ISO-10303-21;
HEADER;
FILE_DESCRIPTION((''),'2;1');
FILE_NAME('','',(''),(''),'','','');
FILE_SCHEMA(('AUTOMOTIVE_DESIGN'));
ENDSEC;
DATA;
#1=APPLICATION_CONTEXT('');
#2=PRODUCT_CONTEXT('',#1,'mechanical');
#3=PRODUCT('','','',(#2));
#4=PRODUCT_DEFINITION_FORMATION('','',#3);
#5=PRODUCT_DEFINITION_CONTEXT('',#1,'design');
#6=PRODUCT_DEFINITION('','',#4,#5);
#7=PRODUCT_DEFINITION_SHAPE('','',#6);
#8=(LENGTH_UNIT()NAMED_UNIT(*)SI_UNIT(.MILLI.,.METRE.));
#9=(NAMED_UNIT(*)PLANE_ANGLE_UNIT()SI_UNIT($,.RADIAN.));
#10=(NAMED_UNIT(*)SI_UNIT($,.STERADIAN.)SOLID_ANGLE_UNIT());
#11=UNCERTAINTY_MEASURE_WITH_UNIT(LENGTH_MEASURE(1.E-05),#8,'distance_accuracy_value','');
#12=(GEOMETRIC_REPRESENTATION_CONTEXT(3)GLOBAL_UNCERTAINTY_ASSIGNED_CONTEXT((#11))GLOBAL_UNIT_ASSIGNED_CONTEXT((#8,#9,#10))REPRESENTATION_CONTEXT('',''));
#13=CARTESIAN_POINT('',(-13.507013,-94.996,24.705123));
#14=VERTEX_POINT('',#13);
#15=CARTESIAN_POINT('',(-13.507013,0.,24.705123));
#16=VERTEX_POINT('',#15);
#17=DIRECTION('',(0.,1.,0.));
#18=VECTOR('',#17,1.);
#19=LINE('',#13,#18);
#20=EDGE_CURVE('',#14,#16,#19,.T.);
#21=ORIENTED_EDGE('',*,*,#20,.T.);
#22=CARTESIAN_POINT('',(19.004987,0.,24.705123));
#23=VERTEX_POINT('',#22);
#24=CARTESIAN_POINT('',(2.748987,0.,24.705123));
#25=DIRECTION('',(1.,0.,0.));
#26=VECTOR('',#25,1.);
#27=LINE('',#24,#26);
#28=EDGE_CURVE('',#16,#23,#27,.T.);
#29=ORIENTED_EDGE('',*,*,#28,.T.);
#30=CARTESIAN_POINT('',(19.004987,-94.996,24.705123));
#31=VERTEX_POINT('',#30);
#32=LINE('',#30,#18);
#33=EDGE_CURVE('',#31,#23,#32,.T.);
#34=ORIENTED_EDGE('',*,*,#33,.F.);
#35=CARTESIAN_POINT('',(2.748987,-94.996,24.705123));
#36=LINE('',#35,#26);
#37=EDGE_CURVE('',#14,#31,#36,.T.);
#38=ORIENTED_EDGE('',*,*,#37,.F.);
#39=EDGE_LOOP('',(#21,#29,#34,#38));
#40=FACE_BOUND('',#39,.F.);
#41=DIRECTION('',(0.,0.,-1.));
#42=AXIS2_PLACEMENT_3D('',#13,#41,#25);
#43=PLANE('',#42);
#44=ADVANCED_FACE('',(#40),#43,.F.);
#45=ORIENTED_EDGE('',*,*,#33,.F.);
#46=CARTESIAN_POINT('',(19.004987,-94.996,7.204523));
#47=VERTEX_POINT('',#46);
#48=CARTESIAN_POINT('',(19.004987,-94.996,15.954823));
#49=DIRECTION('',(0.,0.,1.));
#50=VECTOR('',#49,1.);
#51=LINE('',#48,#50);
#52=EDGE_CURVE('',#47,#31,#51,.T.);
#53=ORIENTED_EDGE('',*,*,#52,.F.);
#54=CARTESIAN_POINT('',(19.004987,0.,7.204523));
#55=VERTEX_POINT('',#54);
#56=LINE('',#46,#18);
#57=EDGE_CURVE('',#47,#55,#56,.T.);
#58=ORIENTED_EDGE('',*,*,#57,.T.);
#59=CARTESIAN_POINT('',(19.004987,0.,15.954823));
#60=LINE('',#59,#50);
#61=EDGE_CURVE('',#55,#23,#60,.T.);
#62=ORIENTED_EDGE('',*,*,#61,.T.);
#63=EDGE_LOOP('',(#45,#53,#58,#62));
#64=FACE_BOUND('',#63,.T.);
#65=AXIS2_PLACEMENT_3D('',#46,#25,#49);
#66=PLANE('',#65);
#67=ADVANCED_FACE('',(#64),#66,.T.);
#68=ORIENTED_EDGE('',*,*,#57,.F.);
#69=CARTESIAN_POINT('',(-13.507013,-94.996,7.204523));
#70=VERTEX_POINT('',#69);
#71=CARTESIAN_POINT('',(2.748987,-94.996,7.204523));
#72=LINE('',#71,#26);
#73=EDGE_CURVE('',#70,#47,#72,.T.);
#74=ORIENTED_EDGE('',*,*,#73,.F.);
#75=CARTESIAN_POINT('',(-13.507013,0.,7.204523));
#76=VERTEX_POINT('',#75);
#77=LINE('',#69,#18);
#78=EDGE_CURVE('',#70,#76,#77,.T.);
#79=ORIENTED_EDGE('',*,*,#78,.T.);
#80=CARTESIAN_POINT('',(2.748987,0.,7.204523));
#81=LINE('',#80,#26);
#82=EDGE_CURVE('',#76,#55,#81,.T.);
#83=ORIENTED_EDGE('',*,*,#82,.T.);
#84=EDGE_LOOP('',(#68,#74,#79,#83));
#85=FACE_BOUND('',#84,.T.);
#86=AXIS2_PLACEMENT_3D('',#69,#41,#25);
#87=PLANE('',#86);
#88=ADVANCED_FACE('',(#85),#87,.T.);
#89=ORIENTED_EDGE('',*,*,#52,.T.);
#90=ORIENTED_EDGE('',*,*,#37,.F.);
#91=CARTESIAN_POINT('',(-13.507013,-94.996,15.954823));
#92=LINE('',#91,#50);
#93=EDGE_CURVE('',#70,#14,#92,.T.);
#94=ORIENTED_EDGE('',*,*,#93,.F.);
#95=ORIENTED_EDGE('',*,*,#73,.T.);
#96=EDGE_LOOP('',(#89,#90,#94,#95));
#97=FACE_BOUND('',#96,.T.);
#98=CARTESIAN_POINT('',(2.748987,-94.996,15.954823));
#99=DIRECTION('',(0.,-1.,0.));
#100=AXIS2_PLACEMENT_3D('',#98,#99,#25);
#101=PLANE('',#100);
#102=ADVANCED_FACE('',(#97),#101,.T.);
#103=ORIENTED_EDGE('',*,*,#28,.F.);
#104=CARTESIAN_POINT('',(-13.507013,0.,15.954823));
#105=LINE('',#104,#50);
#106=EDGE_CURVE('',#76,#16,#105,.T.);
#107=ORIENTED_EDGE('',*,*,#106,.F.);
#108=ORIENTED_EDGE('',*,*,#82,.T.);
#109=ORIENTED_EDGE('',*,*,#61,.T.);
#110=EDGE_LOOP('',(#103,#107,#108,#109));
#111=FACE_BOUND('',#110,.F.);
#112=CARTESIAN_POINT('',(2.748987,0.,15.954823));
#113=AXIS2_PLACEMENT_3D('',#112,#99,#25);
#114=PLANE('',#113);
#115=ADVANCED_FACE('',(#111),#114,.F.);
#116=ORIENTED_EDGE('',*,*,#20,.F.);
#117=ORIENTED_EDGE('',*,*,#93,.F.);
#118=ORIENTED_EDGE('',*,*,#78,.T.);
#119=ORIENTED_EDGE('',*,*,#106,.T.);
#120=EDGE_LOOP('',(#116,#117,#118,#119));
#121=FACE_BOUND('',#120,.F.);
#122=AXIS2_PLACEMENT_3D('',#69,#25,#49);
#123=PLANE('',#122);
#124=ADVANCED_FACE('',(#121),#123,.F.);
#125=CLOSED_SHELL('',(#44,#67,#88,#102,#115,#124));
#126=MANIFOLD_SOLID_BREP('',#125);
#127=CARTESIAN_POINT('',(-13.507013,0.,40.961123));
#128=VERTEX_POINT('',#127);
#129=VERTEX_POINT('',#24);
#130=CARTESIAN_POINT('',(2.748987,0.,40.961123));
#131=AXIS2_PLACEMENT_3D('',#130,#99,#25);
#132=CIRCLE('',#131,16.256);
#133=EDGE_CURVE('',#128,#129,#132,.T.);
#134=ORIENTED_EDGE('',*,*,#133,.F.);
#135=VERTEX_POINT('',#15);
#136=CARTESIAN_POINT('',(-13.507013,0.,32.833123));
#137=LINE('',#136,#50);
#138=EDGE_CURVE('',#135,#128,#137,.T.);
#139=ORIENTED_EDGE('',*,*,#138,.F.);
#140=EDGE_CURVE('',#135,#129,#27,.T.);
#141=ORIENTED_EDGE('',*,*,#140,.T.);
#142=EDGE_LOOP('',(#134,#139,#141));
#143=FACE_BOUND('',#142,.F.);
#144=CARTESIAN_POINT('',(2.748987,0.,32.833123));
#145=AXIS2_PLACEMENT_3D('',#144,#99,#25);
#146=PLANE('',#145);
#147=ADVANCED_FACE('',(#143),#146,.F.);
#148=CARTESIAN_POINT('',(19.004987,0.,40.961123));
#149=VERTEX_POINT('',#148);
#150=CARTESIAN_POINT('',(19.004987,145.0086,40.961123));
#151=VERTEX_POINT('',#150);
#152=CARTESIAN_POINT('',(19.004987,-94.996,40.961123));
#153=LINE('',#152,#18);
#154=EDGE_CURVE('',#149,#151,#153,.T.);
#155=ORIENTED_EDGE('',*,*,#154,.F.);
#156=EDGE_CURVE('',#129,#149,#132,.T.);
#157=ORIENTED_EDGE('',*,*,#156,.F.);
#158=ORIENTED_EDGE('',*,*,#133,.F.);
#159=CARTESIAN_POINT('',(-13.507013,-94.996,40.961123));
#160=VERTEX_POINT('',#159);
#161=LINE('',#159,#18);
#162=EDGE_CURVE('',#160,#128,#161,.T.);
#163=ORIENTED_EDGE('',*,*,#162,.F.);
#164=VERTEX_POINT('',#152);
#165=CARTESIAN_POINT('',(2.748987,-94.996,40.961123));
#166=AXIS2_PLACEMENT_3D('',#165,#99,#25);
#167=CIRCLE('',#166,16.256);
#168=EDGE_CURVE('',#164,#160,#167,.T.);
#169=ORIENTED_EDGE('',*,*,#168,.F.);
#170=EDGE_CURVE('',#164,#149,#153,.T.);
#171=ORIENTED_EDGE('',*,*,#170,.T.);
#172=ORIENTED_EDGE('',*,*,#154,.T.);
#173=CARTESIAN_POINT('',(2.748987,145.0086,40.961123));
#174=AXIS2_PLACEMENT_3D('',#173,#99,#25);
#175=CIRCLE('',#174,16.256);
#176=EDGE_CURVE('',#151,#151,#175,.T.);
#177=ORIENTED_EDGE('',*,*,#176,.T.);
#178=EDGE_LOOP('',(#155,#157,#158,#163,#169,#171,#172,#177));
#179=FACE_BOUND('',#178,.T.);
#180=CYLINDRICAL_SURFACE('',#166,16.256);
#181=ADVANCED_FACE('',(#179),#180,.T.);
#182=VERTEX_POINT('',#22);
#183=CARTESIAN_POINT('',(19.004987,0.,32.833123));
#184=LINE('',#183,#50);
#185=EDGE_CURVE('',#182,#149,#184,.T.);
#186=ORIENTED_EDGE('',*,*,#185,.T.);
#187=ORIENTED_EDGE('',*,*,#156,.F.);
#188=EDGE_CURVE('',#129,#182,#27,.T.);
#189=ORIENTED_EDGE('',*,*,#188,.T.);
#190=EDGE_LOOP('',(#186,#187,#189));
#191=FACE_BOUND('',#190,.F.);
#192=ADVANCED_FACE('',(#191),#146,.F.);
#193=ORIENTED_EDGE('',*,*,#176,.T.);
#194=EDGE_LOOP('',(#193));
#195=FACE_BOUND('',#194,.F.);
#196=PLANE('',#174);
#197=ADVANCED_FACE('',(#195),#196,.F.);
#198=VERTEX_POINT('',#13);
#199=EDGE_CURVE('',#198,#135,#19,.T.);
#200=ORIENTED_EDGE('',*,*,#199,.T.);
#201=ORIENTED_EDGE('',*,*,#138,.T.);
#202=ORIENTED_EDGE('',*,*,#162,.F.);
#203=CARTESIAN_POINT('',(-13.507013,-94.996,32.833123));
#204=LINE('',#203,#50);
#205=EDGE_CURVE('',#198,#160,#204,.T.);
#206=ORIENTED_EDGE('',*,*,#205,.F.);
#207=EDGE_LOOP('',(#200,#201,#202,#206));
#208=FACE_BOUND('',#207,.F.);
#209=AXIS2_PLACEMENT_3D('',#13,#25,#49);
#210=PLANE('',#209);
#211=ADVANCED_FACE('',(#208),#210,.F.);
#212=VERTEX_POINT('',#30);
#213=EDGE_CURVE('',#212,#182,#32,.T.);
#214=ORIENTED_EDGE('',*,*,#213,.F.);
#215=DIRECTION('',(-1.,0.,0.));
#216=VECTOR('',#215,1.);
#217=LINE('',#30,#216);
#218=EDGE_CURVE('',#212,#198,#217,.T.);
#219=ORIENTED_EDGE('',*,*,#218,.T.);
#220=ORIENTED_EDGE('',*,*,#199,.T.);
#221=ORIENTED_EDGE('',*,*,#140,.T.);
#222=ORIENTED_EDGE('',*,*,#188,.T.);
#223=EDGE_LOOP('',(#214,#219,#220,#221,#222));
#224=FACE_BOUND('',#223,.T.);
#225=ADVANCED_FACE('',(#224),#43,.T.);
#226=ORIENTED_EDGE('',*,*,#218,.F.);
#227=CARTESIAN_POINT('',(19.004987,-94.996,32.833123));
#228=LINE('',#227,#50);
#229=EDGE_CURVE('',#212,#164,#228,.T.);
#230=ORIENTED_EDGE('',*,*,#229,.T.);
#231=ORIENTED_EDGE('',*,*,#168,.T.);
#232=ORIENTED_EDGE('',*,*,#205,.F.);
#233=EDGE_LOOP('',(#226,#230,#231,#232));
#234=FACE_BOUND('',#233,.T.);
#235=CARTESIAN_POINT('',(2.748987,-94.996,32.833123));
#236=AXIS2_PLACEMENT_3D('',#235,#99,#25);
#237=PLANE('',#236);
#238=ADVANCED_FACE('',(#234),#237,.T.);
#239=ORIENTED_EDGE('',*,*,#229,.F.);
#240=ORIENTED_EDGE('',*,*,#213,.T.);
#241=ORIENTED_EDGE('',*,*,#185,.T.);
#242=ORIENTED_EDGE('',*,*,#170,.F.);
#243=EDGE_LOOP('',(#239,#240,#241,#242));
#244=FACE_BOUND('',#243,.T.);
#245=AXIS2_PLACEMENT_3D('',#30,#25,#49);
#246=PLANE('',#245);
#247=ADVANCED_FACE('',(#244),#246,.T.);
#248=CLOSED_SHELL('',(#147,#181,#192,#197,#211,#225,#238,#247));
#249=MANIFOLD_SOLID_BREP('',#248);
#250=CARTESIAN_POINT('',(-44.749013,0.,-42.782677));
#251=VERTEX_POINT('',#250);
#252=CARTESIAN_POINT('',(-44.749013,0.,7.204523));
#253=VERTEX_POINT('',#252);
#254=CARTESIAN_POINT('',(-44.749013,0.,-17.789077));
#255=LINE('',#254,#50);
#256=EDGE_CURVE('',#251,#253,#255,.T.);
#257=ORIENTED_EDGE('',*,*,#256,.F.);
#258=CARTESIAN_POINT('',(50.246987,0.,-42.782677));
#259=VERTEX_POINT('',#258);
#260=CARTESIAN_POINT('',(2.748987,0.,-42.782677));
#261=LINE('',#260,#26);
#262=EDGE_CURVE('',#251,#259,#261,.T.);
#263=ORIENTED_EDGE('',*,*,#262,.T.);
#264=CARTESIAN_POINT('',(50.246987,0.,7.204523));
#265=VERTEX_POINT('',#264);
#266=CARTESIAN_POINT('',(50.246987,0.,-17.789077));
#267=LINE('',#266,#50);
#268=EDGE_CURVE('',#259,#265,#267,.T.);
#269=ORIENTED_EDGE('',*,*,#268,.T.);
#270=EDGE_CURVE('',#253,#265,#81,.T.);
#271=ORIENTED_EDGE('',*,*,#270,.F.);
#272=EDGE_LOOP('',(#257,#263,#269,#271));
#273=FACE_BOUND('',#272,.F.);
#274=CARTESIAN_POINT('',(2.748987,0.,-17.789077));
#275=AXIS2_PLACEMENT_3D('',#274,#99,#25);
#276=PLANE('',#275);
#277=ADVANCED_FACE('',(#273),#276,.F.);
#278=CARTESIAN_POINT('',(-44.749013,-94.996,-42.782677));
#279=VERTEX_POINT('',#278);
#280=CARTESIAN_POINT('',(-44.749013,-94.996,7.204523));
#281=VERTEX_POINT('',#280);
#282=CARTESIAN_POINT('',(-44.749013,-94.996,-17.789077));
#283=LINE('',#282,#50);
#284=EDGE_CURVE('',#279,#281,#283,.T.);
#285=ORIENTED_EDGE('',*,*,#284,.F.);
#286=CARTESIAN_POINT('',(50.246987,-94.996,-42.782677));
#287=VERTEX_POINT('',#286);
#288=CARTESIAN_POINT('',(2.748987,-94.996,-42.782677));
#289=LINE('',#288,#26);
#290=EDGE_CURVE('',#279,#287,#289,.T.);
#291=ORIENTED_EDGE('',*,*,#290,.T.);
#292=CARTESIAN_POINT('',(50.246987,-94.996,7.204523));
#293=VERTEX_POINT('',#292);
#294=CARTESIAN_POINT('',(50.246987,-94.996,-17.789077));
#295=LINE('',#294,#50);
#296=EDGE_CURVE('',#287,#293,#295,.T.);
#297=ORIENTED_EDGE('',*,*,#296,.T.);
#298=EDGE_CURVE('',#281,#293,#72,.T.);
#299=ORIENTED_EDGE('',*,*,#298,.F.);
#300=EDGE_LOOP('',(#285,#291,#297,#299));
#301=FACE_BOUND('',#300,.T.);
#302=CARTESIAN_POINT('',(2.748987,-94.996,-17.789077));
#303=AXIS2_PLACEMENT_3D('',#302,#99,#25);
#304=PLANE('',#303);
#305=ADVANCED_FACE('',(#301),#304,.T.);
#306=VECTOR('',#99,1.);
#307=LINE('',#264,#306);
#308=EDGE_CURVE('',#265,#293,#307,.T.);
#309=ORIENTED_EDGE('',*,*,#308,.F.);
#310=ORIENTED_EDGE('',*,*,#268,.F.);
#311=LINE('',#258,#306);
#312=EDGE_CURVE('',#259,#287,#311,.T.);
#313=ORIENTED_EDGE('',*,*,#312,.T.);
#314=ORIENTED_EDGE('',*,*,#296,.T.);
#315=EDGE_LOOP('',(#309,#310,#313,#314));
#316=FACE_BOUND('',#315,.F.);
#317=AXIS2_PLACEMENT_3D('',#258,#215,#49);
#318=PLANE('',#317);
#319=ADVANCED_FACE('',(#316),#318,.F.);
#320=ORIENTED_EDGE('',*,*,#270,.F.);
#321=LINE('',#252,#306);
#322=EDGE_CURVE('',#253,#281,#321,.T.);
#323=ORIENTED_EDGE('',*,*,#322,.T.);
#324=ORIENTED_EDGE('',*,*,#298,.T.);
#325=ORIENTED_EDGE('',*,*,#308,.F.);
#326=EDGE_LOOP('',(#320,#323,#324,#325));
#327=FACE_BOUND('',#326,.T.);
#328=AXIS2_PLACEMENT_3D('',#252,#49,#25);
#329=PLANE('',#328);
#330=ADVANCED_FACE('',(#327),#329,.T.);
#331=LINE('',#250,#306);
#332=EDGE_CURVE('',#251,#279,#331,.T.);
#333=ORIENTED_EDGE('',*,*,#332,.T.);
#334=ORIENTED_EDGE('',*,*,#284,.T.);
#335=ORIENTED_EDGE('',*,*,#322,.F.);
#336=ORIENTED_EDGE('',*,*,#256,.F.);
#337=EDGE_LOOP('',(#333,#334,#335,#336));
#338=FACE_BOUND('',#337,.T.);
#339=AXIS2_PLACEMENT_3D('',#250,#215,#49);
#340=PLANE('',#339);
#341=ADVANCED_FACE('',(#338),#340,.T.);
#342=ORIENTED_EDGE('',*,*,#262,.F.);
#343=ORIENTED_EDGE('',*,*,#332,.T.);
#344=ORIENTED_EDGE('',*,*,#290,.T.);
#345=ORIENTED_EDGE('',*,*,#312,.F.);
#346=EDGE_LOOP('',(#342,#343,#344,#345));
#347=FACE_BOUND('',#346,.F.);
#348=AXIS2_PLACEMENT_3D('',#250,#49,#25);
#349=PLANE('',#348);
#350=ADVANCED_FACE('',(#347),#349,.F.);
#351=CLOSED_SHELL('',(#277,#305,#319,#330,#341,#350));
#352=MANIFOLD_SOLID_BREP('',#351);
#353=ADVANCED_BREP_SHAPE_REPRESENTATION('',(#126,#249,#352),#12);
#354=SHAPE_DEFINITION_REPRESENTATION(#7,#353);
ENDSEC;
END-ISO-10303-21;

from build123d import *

# Parameters (mm, degrees)
F0_W     = 94.996
F0_H     = 49.9872
F1_DEPTH = 94.996
F2_W     = 32.512
F2_H     = 17.5006
F3_DEPTH = 94.996
F4_R     = 16.256
F5_DEPTH = 240.0046
F6_W     = 32.512
F6_H     = 16.256
F7_DEPTH = 94.996


with BuildPart() as f1:
    # F0 (on Front) → F1 (new body)
    with BuildSketch(Plane.XZ):
        with Locations((2.7489867061, -17.7890766389)):
            Rectangle(F0_W, F0_H)
    extrude(amount=F1_DEPTH)


with BuildPart() as f3:
    # F2 (on face) → F3 (new body)
    with BuildSketch(Plane.XZ.offset(94.996)):
        with Locations((2.7489867061, 15.9548233611)):
            Rectangle(F2_W, F2_H)
    extrude(amount=-F3_DEPTH)


with BuildPart() as f5:
    # F4 (on face) → F5 (new body)
    with BuildSketch(Plane.XZ.offset(94.996)):
        with Locations((2.7489867061, 40.9611233611)):
            Circle(F4_R)
    extrude(amount=-F5_DEPTH)

    # F6 (on face) → F7 (join)
    with BuildSketch(Plane.XZ.offset(94.996)):
        with Locations((2.7489867061, 32.8331233611)):
            Rectangle(F6_W, F6_H)
    extrude(amount=-F7_DEPTH)


solid = Compound([f1.part, f3.part, f5.part])
